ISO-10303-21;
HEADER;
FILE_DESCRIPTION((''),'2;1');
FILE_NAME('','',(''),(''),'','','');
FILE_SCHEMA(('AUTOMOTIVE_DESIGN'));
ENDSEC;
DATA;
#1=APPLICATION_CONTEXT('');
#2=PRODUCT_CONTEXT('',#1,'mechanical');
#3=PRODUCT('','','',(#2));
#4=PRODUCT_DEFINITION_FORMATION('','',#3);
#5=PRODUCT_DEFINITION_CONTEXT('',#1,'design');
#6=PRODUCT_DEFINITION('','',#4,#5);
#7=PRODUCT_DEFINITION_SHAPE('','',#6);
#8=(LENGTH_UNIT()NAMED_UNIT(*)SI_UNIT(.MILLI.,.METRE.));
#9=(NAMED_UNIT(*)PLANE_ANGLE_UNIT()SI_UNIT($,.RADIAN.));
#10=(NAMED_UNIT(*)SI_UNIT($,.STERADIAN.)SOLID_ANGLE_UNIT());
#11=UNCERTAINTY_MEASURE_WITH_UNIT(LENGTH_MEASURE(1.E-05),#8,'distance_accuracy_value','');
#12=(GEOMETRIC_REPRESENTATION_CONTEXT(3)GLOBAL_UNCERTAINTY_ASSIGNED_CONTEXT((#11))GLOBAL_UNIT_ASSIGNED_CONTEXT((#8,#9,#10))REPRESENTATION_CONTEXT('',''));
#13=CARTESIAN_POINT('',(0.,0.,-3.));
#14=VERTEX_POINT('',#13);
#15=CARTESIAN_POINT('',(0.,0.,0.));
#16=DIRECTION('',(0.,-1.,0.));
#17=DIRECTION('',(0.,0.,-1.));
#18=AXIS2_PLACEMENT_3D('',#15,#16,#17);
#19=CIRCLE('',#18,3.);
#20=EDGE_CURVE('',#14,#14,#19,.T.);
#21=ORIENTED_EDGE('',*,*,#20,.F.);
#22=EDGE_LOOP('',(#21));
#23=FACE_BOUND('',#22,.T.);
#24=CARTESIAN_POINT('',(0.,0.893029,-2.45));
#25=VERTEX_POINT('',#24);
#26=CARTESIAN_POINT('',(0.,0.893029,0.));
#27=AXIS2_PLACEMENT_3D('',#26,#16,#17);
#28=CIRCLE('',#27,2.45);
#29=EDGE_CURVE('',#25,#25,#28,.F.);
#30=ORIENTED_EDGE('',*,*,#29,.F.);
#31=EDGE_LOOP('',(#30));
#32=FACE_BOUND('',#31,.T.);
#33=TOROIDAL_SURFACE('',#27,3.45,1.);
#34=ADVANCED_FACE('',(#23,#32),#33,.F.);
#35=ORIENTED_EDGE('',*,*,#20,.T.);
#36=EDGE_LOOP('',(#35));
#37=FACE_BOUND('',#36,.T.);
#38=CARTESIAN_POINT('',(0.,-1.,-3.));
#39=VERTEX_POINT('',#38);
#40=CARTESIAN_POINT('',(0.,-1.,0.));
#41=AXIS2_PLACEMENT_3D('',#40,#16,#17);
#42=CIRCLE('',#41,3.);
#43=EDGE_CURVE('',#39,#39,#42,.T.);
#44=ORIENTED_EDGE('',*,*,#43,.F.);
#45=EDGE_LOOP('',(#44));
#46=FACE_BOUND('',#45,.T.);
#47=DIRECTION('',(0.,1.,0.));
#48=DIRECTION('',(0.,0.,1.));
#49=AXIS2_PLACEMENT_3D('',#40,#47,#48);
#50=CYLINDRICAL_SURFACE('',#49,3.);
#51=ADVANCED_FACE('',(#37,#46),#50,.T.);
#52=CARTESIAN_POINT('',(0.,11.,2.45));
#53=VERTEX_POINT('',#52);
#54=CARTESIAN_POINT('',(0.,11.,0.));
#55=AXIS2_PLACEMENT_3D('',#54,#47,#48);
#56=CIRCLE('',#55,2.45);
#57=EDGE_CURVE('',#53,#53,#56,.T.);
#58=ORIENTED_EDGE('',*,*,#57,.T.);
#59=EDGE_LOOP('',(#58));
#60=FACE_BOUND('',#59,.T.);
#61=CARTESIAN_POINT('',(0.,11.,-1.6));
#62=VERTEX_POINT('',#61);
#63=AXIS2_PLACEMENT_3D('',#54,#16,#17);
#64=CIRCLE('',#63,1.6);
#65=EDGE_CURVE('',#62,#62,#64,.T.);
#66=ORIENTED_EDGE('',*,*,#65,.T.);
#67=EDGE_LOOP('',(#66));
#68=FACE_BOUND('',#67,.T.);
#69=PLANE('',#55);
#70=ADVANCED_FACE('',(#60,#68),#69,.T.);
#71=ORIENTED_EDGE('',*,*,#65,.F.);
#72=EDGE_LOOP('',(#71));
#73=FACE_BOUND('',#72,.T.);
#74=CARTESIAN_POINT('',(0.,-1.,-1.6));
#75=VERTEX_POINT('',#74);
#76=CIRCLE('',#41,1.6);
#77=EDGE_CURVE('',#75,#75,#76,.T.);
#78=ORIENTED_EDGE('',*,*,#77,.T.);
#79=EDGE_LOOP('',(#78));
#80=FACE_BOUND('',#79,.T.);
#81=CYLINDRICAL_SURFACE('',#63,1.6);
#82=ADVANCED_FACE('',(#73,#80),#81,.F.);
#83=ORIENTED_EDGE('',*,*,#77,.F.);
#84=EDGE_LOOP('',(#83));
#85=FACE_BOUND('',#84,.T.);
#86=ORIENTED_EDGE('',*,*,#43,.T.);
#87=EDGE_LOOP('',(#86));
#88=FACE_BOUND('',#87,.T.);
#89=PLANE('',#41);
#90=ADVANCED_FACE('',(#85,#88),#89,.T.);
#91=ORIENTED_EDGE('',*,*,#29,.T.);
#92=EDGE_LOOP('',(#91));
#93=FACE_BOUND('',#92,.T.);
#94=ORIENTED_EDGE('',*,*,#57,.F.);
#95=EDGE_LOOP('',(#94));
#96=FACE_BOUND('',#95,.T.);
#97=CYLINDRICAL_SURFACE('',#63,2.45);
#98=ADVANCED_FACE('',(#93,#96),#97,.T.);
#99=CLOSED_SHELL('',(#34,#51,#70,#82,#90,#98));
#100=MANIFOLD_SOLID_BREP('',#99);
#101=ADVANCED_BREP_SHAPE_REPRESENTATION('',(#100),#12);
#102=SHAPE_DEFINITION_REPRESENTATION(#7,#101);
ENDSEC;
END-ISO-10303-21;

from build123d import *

# Parameters (mm, degrees)
SKETCH1_R           = 2.45
SKETCH1_R_2         = 1.5
BOSS_EXTRUDE1_DEPTH = 11
SKETCH2_R           = 3
BOSS_EXTRUDE2_DEPTH = 1
SKETCH3_R           = 1.6
CUT_EXTRUDE1_DEPTH  = 13.727922061
FILLET2_R           = 1


with BuildPart() as part:
    # Sketch1 → Boss-Extrude1 (new body)
    with BuildSketch(Plane(origin=(0, 0, 0), x_dir=(1, 0, 0), z_dir=(0, 1, 0))):
        with Locations(Location((0, 0, 0), (0, 0, 270))):
            Circle(SKETCH1_R)
        with Locations(Location((0, 0, 0), (0, 0, 270))):
            Circle(SKETCH1_R_2, mode=Mode.SUBTRACT)
    extrude(amount=BOSS_EXTRUDE1_DEPTH)

    # Sketch2 → Boss-Extrude2 (add)
    with BuildSketch(Plane(origin=(0, 0, 0), x_dir=(-1, 0, 0), z_dir=(0, -1, 0))):
        with Locations(Location((0, 0, 0), (0, 0, 90))):
            Circle(SKETCH2_R)
    extrude(amount=BOSS_EXTRUDE2_DEPTH)

    # Sketch3 → Cut-Extrude1 (cut, through all)
    with BuildSketch(Plane(origin=(0, -1, 0), x_dir=(-1, 0, 0), z_dir=(0, -1, 0))):
        with Locations(Location((0, 0, 0), (0, 0, 90))):
            Circle(SKETCH3_R)
    extrude(amount=-CUT_EXTRUDE1_DEPTH, mode=Mode.SUBTRACT)

    # Fillet2
    # the kernel refuses this fillet: 1 mm, written as the material it adds along each edge
    with BuildSketch(Plane(origin=(0, 0, 0), x_dir=(0, 0, 1), z_dir=(-1, 0, 0))) as fillet2_piece_1:
        with BuildLine():
            CenterArc((3.45, 0.893028555), FILLET2_R, 180, 63.25631605)
            Line((2.45, 0.893028555), (2.43, 0.893028555))
            Line((2.43, 0.893028555), (2.43, 0))
            Line((2.43, 0), (2.45, -0.02))
            ThreePointArc((2.45, -0.02), (2.725, -0.02), (2.991, -0.017860571))
            Line((2.991, -0.017860571), (3, 0))
        make_face()
    revolve(axis=Axis((0, 0, 0), (0, 1, 0)))


solid = part.part
